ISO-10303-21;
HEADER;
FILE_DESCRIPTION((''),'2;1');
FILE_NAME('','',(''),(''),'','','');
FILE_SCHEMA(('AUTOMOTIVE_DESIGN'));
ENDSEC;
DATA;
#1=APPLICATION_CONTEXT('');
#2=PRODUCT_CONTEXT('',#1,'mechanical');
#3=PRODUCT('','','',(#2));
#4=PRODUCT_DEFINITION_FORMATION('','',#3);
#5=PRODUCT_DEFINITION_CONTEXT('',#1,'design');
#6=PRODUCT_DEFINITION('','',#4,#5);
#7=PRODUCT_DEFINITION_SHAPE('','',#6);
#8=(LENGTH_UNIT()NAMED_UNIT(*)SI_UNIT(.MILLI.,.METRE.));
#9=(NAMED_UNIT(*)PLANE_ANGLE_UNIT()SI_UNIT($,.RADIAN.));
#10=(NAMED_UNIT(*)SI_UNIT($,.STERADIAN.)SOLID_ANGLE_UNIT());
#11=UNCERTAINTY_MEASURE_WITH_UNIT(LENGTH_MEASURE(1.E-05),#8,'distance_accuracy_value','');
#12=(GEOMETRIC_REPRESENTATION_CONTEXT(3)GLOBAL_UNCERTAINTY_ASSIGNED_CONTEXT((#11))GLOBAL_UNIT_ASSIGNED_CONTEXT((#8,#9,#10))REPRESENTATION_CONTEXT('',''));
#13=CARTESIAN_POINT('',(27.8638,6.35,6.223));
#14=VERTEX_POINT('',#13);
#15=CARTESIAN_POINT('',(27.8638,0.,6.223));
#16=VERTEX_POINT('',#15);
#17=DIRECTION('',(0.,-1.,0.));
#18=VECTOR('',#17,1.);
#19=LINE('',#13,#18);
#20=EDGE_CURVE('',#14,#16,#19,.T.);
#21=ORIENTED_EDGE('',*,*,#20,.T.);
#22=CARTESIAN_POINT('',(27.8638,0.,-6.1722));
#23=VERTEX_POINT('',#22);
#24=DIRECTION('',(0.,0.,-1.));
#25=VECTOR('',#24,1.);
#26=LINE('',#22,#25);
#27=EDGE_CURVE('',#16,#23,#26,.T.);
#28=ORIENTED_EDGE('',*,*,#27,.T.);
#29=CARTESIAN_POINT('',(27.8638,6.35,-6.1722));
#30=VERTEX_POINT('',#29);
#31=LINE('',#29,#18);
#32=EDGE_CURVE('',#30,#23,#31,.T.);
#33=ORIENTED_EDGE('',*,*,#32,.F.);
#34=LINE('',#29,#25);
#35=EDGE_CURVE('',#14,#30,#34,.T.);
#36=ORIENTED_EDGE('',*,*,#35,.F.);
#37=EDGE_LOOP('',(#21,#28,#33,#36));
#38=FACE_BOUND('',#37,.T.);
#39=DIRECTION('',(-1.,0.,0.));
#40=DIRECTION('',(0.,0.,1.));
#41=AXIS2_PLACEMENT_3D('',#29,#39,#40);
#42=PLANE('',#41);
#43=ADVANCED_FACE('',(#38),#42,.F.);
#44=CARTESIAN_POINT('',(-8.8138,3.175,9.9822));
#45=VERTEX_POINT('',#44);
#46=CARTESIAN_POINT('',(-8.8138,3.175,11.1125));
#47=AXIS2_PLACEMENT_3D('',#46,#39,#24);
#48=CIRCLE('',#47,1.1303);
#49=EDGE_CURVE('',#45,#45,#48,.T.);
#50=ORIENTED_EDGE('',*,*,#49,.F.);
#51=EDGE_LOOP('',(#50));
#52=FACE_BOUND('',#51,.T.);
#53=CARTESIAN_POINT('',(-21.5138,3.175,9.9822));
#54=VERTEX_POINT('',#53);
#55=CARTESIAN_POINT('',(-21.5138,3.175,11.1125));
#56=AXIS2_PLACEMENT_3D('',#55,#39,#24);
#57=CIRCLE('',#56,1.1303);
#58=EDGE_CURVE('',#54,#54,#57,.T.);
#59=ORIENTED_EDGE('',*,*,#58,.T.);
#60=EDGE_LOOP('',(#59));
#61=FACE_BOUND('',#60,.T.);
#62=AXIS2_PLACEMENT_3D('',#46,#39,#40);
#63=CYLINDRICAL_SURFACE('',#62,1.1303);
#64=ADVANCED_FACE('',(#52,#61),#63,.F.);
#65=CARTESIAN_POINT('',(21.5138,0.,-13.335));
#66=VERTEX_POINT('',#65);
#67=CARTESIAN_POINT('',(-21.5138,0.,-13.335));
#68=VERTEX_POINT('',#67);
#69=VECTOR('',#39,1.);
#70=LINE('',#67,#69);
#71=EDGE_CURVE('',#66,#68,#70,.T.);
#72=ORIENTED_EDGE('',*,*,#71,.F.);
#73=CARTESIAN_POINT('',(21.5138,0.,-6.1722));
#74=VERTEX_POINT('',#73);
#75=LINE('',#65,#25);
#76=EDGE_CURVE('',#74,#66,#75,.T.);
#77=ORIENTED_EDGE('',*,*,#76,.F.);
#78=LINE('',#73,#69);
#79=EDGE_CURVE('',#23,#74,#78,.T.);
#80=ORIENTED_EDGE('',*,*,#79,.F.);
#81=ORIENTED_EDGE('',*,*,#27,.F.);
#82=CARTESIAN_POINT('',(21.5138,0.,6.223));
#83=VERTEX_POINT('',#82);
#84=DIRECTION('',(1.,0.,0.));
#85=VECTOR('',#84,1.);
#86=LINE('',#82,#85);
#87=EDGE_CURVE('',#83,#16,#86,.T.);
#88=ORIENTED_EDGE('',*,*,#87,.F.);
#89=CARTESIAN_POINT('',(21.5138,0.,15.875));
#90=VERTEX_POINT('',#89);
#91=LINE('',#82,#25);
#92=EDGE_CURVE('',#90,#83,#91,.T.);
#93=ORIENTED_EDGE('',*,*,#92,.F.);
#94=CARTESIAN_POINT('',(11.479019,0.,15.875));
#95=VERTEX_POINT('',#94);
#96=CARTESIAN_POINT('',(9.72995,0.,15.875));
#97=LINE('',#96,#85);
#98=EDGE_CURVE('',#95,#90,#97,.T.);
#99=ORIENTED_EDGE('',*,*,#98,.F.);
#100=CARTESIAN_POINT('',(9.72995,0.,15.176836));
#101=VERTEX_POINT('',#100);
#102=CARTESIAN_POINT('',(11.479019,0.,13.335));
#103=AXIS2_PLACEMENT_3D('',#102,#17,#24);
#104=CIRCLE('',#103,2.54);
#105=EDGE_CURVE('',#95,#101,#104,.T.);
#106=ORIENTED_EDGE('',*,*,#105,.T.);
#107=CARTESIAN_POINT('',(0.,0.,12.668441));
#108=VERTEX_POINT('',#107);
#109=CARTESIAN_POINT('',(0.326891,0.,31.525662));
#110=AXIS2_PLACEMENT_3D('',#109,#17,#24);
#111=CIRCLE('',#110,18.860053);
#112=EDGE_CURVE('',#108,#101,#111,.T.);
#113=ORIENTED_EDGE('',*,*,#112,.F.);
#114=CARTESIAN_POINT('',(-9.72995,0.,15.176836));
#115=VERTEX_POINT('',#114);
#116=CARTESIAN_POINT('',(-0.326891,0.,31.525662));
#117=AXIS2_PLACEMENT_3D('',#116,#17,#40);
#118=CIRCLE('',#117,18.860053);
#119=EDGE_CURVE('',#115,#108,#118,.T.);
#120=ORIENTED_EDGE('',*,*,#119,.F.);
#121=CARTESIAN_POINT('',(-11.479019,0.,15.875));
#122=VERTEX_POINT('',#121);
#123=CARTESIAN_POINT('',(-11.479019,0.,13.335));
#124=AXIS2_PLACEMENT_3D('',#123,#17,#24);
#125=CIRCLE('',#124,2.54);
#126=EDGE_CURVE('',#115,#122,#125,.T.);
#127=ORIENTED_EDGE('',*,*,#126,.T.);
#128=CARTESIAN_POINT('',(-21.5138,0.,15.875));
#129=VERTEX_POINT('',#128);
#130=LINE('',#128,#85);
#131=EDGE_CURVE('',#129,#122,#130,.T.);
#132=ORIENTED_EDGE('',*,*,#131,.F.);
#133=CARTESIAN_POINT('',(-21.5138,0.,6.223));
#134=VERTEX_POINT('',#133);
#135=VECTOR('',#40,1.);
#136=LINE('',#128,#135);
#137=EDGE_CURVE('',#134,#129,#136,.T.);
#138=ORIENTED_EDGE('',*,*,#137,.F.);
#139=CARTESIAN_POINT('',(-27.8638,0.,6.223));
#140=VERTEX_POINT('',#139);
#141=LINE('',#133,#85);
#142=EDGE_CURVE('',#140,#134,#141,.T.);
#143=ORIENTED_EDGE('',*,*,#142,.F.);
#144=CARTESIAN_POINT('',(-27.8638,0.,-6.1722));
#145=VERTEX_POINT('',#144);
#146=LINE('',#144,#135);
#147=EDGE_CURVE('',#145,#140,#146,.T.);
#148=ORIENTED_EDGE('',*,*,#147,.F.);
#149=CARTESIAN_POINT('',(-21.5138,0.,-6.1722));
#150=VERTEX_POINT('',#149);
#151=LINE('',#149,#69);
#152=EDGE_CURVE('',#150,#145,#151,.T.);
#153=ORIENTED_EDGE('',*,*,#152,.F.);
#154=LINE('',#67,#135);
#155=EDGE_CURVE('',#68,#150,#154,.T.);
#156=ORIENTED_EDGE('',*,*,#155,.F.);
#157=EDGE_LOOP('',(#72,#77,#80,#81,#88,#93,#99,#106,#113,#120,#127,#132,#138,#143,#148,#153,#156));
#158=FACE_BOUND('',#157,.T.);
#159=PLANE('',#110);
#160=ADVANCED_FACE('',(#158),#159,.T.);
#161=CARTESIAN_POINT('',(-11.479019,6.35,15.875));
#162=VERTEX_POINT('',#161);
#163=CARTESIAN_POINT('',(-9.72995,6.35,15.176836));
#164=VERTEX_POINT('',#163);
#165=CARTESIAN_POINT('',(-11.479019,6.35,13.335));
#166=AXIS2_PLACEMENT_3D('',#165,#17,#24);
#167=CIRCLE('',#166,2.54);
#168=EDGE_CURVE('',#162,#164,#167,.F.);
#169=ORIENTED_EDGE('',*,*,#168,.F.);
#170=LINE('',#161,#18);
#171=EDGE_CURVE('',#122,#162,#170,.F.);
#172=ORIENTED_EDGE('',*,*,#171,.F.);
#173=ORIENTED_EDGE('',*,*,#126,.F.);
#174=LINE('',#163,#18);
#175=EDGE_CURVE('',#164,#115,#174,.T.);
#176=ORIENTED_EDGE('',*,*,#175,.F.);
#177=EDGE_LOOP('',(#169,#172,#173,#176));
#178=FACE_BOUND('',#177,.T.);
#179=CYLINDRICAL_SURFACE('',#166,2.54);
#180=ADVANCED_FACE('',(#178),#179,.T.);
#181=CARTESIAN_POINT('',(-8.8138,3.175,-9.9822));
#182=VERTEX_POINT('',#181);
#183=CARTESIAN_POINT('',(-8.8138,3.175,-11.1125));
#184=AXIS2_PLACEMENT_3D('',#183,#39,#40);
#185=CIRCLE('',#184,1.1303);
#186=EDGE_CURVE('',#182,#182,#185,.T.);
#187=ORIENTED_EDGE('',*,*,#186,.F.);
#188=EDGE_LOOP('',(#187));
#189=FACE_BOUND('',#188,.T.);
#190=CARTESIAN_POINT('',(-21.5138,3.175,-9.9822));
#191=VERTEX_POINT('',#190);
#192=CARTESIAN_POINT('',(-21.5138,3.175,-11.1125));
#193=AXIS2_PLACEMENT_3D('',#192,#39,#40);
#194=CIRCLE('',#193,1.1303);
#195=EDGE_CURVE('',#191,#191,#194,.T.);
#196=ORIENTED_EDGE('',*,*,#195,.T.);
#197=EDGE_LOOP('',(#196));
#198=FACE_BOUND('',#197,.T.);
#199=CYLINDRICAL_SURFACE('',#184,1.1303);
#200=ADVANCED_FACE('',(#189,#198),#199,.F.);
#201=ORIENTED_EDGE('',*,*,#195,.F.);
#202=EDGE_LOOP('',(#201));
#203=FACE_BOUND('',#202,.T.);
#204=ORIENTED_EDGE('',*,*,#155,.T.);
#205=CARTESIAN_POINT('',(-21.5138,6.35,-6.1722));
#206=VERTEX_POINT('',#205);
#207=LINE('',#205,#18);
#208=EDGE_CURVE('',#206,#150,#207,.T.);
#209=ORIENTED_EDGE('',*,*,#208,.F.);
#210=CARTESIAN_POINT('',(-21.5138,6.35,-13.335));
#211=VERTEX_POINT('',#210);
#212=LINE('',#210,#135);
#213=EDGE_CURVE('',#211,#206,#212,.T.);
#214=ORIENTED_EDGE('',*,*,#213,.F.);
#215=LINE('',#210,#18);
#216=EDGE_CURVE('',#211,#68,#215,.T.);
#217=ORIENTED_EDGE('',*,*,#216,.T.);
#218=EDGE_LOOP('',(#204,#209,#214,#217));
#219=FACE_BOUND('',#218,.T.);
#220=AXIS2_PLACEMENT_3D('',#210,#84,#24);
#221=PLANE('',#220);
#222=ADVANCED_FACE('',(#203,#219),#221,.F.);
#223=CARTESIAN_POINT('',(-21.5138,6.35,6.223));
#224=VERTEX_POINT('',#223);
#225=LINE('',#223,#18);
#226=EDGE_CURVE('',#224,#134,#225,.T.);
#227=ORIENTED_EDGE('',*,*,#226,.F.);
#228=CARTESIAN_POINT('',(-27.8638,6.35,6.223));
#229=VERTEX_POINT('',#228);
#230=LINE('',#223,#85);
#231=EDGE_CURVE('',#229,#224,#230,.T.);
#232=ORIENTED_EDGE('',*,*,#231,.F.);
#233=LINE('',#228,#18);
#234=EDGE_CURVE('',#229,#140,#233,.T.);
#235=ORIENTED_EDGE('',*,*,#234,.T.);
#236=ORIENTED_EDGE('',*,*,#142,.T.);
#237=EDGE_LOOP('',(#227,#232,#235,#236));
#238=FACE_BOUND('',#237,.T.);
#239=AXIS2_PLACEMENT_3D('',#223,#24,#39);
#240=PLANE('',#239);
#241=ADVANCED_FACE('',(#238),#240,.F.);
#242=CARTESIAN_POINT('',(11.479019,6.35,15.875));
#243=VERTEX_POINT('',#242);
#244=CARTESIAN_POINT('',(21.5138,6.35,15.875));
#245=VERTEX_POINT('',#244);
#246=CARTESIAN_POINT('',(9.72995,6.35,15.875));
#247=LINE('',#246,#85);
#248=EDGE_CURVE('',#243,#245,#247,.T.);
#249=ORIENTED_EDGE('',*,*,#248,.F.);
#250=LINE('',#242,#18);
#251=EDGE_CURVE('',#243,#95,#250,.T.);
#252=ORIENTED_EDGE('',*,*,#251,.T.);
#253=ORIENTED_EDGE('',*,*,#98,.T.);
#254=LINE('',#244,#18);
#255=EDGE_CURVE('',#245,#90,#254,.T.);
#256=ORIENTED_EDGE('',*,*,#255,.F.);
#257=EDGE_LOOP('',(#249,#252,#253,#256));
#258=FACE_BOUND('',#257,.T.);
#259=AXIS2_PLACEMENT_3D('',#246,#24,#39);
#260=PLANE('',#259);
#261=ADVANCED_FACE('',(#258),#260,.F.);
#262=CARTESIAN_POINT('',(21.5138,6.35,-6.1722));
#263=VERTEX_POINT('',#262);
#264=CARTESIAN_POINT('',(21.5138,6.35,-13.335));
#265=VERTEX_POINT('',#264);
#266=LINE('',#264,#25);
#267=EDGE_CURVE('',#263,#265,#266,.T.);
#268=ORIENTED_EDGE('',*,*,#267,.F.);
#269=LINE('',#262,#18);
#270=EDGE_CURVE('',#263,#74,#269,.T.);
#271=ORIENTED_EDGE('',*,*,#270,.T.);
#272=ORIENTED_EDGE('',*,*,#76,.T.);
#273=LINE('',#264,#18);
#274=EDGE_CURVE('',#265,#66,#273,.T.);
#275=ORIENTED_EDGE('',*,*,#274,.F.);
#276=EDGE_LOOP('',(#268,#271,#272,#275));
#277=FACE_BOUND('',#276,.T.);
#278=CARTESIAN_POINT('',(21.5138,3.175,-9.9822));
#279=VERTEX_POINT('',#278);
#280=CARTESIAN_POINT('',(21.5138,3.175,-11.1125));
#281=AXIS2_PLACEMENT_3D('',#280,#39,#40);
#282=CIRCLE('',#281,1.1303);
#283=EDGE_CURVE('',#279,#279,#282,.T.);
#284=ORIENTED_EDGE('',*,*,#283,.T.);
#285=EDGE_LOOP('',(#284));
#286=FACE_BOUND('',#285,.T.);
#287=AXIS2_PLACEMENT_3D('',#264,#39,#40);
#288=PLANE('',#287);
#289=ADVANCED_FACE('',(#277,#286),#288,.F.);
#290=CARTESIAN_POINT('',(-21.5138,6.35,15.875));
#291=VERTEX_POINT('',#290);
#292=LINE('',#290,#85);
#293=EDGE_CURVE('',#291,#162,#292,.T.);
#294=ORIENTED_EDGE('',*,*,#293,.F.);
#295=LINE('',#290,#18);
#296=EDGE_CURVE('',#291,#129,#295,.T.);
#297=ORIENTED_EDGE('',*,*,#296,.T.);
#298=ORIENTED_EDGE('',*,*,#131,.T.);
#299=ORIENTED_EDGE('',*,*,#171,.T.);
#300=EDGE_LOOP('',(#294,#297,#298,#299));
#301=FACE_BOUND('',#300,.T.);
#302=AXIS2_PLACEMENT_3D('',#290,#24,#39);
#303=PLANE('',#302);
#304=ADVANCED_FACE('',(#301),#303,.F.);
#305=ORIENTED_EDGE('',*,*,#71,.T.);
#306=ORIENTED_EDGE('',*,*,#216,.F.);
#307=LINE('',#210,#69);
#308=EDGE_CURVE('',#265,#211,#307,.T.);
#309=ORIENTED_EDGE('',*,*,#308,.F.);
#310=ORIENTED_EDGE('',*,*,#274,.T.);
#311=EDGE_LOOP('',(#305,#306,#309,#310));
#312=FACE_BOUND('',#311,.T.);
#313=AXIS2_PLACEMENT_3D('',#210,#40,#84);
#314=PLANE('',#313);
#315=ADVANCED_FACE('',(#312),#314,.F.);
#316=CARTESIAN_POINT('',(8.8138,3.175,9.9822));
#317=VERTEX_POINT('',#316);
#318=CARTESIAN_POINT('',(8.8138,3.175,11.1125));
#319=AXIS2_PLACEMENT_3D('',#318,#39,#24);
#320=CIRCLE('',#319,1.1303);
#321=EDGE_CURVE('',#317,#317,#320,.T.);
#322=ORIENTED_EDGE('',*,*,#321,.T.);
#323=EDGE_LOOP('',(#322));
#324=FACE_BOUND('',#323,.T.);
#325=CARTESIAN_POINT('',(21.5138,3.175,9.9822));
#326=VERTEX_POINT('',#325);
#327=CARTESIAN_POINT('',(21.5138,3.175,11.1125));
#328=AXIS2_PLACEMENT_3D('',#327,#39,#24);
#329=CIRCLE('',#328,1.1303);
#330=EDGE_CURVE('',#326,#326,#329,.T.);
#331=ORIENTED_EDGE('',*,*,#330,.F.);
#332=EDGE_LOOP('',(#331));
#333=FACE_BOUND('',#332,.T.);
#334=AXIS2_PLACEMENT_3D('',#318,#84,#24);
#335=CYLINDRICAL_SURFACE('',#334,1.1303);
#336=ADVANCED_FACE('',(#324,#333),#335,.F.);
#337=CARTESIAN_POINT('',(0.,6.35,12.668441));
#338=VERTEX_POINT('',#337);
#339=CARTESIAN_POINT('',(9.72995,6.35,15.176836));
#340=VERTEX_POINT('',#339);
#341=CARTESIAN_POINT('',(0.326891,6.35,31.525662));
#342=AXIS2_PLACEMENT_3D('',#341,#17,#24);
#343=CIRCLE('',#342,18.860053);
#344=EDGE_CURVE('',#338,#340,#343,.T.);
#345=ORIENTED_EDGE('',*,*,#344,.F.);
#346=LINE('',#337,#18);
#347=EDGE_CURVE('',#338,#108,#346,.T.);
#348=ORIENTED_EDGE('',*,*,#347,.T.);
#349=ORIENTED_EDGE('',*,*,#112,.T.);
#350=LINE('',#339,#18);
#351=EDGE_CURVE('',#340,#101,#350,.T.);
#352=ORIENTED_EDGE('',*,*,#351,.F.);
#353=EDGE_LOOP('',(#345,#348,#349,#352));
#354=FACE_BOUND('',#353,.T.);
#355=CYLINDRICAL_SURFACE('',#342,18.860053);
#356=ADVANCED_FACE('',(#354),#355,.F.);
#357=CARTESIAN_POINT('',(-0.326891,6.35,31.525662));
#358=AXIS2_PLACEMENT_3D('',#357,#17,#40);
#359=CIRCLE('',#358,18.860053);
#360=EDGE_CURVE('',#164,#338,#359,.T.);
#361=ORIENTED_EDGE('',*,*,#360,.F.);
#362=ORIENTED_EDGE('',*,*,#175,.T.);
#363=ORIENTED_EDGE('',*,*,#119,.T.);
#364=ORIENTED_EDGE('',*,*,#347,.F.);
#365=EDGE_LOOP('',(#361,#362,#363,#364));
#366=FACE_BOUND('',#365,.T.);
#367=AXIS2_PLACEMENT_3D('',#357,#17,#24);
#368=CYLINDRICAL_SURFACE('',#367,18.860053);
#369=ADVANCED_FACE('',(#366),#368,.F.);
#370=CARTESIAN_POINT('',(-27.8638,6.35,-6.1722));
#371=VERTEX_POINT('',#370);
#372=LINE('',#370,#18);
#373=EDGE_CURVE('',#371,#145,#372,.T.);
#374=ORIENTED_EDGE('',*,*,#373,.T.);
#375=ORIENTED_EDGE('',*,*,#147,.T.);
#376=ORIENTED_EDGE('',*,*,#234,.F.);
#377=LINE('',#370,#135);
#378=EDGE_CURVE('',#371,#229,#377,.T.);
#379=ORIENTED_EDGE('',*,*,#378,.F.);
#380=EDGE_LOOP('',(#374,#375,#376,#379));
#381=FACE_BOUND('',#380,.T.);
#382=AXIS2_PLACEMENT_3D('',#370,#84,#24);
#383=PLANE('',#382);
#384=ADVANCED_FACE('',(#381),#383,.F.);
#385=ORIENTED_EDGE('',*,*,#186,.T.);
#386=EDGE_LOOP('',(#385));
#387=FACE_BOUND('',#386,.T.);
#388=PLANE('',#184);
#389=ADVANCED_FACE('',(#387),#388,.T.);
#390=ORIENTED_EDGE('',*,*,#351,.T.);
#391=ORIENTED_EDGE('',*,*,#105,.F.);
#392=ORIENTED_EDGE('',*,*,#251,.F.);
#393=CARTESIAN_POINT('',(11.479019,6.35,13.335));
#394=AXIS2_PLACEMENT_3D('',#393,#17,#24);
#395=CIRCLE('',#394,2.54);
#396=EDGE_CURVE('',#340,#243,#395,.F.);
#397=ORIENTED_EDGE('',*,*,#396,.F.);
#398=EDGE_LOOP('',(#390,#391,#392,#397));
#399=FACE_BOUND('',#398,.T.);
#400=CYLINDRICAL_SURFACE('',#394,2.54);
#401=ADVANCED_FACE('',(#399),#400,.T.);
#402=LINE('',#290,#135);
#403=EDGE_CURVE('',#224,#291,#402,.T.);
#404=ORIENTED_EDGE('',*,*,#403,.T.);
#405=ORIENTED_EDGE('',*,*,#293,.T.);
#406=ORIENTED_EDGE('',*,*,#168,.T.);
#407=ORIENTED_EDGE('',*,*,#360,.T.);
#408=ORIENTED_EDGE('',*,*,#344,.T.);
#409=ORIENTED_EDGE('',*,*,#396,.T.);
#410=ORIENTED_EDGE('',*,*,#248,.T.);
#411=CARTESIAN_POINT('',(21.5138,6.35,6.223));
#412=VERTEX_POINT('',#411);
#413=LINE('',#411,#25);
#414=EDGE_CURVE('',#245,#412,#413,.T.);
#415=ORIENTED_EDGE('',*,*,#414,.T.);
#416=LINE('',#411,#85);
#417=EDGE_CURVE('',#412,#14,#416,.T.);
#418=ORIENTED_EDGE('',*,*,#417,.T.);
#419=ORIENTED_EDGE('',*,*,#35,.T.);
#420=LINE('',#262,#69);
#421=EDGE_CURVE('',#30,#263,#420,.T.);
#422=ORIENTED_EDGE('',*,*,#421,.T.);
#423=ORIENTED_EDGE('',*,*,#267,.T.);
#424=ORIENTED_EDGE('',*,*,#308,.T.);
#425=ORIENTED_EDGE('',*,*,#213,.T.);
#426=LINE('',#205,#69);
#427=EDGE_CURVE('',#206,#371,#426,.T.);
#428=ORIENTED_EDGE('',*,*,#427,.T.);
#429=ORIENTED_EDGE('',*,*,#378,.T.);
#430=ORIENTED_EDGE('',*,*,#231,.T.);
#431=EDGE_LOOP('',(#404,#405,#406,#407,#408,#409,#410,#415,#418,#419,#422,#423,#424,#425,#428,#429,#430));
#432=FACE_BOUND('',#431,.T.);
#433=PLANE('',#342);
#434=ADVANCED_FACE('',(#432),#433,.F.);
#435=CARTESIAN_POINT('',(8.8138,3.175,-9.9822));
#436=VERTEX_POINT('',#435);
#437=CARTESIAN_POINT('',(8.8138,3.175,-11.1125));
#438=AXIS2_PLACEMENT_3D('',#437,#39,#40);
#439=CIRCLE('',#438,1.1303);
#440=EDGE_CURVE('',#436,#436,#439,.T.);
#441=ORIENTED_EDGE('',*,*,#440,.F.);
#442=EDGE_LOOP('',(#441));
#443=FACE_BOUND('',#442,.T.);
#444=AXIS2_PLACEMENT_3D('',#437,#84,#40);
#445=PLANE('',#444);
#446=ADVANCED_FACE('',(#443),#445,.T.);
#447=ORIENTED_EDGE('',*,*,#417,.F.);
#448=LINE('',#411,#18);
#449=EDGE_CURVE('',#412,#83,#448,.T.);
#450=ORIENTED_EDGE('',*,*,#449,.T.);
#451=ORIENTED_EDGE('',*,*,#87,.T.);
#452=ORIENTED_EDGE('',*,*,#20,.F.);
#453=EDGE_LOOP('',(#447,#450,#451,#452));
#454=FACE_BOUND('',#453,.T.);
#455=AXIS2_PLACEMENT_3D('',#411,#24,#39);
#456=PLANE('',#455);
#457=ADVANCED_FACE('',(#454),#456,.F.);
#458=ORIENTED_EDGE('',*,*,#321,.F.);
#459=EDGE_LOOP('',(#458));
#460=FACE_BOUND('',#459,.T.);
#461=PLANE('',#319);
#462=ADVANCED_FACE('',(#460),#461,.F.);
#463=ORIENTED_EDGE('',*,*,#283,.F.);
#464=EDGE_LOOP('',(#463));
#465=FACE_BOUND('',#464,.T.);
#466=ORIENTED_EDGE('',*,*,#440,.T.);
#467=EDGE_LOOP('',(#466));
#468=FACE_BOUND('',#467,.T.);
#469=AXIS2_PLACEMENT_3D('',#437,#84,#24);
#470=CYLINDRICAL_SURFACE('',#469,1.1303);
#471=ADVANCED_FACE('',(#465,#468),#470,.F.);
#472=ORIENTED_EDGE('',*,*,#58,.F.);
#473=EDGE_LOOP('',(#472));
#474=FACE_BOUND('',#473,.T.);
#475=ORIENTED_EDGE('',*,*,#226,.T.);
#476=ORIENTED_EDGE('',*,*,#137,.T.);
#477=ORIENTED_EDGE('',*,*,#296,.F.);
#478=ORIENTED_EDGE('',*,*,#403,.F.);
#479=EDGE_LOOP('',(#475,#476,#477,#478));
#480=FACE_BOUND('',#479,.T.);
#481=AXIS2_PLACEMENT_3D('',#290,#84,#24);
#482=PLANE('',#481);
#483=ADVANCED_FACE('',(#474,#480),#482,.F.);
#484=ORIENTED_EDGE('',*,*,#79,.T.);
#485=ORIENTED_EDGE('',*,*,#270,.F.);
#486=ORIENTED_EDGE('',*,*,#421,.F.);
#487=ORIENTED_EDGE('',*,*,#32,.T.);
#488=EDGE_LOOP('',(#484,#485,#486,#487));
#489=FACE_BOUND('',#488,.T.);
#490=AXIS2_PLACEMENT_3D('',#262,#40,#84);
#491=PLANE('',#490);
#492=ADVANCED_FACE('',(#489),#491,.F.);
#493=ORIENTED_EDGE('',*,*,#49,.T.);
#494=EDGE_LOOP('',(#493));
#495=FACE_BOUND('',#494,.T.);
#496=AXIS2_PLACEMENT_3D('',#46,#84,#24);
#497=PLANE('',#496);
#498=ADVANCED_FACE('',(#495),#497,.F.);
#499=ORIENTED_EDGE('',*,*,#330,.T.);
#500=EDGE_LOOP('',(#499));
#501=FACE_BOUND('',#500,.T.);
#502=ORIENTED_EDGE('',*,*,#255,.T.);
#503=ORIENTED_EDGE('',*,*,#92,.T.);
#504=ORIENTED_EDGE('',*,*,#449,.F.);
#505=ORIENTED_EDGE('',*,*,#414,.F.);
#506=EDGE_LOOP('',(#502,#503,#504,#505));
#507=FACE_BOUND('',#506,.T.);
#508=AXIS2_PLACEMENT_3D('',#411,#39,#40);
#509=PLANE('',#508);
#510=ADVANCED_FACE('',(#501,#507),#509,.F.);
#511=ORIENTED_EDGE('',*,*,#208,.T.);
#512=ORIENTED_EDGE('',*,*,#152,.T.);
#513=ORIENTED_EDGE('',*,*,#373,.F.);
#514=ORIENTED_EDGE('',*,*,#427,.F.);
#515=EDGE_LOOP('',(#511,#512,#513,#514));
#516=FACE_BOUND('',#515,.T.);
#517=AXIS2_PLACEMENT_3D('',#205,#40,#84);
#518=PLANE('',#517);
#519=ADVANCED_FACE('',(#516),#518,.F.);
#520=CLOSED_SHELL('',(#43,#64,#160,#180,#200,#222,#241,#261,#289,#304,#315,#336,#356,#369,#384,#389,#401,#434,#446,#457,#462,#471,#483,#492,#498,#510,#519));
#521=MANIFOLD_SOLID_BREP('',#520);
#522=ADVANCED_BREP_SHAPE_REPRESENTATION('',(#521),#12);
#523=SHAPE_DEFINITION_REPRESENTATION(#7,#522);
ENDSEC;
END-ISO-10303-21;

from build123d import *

# Parameters (mm, degrees)
BOSS_EXTRUDE1_DEPTH = 6.35
SKETCH2_R           = 1.1303
CUT_EXTRUDE1_DEPTH  = 12.7
FILLET1_R           = 2.54


with BuildPart() as part:
    # Sketch1 → Boss-Extrude1 (new body)
    with BuildSketch(Plane(origin=(0, 0, 0), x_dir=(1, 0, 0), z_dir=(0, 1, 0))):
        with BuildLine():
            Line((-21.5138, -15.875), (-9.729950234, -15.875))
            Line((-9.729950234, -15.875), (-9.729950234, -15.176835913))
            ThreePointArc((-9.729950234, -15.176835913), (-5.035098569, -13.262737362), (0, -12.668441286))
            ThreePointArc((0, -12.668441286), (5.035098569, -13.262737362), (9.729950234, -15.176835913))
            Line((9.729950234, -15.176835913), (9.729950234, -15.875))
            Line((9.729950234, -15.875), (21.5138, -15.875))
            Line((21.5138, -15.875), (21.5138, -6.223))
            Line((21.5138, -6.223), (27.8638, -6.223))
            Line((27.8638, -6.223), (27.8638, 6.1722))
            Line((27.8638, 6.1722), (21.5138, 6.1722))
            Line((21.5138, 6.1722), (21.5138, 13.335))
            Line((21.5138, 13.335), (-21.5138, 13.335))
            Line((-21.5138, 13.335), (-21.5138, 6.1722))
            Line((-21.5138, 6.1722), (-27.8638, 6.1722))
            Line((-27.8638, 6.1722), (-27.8638, -6.223))
            Line((-27.8638, -6.223), (-21.5138, -6.223))
            Line((-21.5138, -6.223), (-21.5138, -15.875))
        make_face()
    extrude(amount=BOSS_EXTRUDE1_DEPTH)

    # Sketch2 → Cut-Extrude1 (cut)
    with BuildSketch(Plane.ZY.offset(21.5138)):
        with Locations((-11.1125, 3.175)):
            Circle(SKETCH2_R)
        with Locations(Location((11.1125, 3.175, 0), (0, 0, 180))):
            Circle(SKETCH2_R)
    cut_extrude1 = extrude(amount=-CUT_EXTRUDE1_DEPTH, mode=Mode.SUBTRACT)

    # Mirror1: Cut-Extrude1 across plane
    add(cut_extrude1.mirror(Plane(origin=(0, 0, 0), x_dir=(0, 0, 1), z_dir=(1, 0, 0))), mode=Mode.SUBTRACT)

    # Fillet1
    # the kernel refuses this fillet: 2.54 mm, written as the material it takes off along each edge
    with BuildSketch(Plane(origin=(9.729950234, -4.372671145, 15.875), x_dir=(0, 0, -1), z_dir=(0, 1, 0))) as fillet1_piece_1:
        with BuildLine():
            CenterArc((2.54, -1.749068458), FILLET1_R, 136.479850512, 43.520149488)
            Line((0, -1.749068458), (-0.0508, -1.749068458))
            Line((-0.0508, -1.749068458), (-0.0508, 0))
            Line((-0.0508, 0), (0, 0.0508))
            ThreePointArc((0, 0.0508), (0.349082044, 0.0508), (0.661327369, 0.034981369))
            Line((0.661327369, 0.034981369), (0.698164087, 0))
        make_face()
    extrude(amount=15.095342289, mode=Mode.SUBTRACT)
    with BuildSketch(Plane(origin=(-9.729950234, -4.372671145, 15.875), x_dir=(-1, 0, 0), z_dir=(0, 1, 0))) as fillet1_piece_2:
        with BuildLine():
            CenterArc((1.749068458, -2.54), FILLET1_R, 90, 43.520149488)
            Line((0, -0.698164087), (-0.034981369, -0.661327369))
            ThreePointArc((-0.034981369, -0.661327369), (-0.0508, -0.349082044), (-0.0508, 0))
            Line((-0.0508, 0), (0, 0.0508))
            Line((0, 0.0508), (1.749068458, 0.0508))
            Line((1.749068458, 0.0508), (1.749068458, 0))
        make_face()
    extrude(amount=15.095342289, mode=Mode.SUBTRACT)


solid = part.part
